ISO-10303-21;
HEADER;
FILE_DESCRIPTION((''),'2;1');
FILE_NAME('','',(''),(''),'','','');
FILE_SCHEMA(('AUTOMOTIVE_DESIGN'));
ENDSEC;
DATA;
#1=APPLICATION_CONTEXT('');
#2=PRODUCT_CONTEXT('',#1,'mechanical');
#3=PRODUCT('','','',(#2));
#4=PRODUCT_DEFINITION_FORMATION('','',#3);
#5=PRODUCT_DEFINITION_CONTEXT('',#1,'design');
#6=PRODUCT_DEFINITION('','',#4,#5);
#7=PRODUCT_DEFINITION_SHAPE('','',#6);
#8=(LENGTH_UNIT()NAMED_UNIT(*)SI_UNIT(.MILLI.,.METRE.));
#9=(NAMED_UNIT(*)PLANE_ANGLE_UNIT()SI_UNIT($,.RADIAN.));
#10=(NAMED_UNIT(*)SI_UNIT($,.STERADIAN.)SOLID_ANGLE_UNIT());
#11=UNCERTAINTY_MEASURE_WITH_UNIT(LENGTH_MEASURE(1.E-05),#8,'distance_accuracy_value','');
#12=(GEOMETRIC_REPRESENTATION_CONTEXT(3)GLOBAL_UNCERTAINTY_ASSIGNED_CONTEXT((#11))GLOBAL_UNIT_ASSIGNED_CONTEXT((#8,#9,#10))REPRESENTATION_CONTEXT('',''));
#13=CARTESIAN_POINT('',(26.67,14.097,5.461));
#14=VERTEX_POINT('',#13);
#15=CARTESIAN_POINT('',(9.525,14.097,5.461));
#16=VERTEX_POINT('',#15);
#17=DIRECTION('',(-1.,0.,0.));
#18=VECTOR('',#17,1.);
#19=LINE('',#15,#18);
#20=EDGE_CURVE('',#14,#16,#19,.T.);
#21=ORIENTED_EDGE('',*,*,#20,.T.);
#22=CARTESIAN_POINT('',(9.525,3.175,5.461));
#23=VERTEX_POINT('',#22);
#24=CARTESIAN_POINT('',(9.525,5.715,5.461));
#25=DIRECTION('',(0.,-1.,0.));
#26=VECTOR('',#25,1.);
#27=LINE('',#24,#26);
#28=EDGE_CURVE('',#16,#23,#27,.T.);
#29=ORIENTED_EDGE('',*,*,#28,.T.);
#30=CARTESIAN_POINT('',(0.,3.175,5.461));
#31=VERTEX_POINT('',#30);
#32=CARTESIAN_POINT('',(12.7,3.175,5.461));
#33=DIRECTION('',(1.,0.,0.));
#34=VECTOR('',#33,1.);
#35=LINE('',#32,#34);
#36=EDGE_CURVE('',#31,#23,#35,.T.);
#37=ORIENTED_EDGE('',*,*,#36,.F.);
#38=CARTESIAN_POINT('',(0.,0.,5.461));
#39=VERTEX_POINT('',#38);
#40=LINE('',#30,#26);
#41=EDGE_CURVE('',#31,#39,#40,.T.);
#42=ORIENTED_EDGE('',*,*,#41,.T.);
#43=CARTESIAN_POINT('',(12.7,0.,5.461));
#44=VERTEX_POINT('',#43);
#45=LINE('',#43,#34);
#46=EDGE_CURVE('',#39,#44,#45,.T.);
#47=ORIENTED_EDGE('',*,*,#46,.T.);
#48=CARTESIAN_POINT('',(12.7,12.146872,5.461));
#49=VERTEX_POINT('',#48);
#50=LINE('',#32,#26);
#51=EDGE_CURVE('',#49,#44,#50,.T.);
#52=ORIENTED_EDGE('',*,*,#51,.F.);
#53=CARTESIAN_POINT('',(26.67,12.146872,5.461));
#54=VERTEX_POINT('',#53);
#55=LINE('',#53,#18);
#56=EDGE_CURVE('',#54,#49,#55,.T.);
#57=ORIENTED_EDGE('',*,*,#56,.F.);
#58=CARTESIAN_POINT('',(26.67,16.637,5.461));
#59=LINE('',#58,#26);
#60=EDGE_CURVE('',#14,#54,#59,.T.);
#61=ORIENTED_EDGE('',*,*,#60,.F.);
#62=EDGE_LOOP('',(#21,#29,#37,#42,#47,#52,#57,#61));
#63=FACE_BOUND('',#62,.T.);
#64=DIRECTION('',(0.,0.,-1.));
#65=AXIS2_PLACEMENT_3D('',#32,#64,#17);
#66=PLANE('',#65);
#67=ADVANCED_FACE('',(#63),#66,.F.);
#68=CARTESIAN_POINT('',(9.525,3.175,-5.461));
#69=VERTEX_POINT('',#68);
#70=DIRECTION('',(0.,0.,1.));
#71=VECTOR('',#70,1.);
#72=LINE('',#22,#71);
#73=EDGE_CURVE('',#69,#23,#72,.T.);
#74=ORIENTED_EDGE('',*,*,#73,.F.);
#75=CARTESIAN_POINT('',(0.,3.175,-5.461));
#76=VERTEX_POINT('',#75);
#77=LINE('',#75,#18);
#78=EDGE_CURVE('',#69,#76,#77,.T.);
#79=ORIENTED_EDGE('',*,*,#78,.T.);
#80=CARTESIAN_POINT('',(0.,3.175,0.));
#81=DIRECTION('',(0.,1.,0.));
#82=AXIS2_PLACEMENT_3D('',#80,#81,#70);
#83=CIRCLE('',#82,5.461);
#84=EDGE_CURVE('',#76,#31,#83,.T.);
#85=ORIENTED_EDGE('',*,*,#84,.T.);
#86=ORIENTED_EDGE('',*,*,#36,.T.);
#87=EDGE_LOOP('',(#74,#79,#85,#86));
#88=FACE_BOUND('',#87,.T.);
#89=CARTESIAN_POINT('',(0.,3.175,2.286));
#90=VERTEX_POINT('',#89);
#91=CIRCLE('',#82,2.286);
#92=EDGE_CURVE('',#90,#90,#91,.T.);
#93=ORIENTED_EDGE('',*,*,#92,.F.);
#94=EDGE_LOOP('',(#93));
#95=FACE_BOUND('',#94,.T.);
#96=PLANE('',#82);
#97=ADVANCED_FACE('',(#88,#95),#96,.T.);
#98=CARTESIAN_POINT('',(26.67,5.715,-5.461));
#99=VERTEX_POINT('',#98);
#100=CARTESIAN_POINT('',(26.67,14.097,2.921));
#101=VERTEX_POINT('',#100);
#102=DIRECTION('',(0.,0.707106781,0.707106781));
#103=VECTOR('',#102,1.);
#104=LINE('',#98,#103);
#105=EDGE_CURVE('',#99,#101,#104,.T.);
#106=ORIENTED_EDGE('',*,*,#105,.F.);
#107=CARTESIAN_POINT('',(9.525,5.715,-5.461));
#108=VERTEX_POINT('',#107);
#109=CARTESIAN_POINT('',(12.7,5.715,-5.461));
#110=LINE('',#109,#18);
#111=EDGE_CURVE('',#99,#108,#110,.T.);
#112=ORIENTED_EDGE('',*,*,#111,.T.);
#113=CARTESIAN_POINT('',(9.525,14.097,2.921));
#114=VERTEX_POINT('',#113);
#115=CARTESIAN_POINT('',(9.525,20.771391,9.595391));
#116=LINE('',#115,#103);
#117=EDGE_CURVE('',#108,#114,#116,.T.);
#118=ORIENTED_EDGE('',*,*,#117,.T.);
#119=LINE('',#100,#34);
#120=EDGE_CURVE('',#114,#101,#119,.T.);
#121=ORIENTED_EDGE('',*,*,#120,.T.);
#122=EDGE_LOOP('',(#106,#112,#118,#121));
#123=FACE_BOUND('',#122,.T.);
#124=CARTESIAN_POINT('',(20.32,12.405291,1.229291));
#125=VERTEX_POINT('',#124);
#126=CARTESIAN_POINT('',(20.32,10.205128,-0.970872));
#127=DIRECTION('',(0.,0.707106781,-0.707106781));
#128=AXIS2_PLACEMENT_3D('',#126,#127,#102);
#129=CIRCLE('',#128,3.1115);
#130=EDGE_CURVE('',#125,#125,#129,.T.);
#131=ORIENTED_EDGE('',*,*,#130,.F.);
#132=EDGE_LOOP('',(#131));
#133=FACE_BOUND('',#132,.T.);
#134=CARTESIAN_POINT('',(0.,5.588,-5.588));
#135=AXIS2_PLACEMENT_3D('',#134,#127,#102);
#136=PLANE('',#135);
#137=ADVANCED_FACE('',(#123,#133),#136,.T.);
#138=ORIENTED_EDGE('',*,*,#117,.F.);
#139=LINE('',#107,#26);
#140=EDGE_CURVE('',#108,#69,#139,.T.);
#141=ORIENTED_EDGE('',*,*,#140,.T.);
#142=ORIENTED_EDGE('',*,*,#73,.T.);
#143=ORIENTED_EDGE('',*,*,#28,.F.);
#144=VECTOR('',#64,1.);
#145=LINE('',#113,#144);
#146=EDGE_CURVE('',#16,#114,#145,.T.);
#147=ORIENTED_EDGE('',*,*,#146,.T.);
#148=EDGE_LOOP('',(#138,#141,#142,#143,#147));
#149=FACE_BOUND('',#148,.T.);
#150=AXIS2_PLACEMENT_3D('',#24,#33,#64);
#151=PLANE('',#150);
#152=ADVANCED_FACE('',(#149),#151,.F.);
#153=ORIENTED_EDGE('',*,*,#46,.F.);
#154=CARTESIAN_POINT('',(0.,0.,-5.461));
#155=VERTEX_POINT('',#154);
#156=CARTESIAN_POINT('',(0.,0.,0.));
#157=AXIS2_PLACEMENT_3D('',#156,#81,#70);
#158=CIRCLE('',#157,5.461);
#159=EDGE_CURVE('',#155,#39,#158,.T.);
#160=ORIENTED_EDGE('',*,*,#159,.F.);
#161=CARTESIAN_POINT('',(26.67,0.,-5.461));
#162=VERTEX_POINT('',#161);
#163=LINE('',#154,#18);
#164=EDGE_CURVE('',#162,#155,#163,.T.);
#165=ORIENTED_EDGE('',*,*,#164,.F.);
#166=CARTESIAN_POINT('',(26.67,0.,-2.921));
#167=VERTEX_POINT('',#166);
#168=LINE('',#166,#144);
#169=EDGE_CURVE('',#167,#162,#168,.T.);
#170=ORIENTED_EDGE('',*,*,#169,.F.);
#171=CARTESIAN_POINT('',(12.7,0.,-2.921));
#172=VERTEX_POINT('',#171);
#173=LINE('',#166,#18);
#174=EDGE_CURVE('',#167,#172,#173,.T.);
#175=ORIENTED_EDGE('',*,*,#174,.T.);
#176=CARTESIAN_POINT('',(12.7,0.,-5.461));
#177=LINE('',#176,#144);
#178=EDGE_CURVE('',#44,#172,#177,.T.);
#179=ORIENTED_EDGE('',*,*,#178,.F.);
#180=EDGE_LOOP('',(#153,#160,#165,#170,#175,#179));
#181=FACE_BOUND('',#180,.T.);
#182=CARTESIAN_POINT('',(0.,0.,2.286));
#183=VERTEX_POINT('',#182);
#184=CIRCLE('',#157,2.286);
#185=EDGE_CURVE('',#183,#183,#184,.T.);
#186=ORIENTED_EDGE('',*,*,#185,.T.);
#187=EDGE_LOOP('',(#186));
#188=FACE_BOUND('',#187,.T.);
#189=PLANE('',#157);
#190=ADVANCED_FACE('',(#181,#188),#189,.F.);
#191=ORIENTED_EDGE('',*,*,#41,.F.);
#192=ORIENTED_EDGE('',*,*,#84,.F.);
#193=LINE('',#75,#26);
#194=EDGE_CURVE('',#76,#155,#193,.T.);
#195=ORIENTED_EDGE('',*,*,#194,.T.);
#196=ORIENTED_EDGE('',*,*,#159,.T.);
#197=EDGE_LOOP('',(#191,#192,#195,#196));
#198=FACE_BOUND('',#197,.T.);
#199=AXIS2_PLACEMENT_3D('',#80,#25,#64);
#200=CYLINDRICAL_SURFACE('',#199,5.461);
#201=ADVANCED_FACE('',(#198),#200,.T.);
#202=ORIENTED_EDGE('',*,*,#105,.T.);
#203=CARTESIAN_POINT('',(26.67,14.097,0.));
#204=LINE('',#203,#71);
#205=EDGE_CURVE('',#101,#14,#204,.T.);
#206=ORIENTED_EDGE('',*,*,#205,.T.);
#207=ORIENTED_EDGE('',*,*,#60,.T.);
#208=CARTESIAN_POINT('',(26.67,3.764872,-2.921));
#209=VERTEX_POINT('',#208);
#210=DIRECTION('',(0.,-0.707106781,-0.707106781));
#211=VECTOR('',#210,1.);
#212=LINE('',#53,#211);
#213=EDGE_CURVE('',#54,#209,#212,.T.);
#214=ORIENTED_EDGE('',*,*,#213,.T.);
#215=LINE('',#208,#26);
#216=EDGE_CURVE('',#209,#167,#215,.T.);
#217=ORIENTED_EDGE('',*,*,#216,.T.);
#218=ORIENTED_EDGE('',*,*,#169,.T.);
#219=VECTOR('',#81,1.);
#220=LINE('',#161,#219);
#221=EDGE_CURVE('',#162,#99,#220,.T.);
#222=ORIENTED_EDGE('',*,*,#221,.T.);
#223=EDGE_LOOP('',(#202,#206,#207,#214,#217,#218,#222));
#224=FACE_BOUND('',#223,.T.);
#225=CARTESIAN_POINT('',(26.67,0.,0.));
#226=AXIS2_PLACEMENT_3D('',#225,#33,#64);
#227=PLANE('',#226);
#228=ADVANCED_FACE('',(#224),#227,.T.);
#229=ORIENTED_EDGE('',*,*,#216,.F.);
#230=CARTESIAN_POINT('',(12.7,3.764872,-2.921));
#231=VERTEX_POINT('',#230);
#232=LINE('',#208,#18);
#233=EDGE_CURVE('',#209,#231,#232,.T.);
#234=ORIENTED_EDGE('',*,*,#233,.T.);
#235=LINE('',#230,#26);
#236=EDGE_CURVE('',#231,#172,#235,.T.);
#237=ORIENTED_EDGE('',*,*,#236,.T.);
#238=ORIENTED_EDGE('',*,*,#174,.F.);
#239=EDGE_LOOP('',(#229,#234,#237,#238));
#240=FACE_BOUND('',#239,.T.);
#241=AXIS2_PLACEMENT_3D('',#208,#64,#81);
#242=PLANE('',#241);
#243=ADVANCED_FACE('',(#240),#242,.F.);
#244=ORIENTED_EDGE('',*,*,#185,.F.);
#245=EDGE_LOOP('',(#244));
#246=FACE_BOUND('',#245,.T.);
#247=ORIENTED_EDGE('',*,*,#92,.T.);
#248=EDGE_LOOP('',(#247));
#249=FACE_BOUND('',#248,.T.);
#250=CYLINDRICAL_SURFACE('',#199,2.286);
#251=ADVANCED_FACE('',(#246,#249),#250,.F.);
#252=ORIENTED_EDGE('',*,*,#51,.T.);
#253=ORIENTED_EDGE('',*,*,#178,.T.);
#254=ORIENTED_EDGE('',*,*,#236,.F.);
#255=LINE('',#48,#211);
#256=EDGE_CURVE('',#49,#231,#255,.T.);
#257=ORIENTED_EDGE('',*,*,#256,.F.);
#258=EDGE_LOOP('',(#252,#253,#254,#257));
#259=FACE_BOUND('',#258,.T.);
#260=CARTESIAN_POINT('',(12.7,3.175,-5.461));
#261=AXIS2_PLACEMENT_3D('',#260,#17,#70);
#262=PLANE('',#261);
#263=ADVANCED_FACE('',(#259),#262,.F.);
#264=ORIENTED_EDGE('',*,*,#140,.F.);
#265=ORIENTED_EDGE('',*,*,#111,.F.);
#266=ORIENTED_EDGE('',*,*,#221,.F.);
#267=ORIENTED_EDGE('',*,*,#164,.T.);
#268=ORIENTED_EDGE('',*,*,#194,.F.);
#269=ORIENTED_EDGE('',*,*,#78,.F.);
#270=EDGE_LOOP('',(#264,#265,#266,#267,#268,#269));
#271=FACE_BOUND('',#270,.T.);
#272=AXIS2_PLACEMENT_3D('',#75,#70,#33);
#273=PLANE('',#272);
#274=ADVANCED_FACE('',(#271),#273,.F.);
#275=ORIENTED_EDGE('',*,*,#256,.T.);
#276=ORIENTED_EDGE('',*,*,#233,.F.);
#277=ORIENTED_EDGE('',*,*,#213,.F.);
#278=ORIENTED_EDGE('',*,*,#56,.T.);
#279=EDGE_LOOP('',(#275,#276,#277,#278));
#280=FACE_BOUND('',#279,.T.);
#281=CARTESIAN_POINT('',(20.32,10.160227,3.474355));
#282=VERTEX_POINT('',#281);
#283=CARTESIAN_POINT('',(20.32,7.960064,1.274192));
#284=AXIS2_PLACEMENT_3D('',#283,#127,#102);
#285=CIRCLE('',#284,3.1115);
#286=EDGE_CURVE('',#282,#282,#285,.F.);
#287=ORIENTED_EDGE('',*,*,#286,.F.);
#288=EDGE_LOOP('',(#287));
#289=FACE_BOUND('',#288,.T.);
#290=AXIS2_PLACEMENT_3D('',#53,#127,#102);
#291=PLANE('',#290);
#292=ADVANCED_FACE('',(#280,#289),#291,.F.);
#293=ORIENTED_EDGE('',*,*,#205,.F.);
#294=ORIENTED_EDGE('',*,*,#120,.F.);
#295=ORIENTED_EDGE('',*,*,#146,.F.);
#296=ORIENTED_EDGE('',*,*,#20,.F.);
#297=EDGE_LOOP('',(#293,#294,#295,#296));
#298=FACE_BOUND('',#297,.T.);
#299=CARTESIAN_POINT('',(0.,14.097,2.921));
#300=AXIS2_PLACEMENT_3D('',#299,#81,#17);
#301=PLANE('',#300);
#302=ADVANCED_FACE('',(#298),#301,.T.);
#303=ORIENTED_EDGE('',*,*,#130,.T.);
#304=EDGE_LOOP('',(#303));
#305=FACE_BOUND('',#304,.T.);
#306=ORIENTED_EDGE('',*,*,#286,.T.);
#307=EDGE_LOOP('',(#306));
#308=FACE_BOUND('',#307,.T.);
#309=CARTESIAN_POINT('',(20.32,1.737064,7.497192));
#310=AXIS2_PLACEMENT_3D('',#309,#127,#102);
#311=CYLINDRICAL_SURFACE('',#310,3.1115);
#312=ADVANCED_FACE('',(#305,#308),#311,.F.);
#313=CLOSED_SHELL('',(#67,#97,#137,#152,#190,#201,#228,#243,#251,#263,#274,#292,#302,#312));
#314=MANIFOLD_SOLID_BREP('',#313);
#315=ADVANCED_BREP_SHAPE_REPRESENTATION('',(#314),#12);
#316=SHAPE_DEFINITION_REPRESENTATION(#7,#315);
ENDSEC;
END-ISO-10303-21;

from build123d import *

# Parameters (mm, degrees)
SKETCH1_R           = 2.286
BOSS_EXTRUDE1_DEPTH = 3.175
SKETCH5_W           = 3.175
SKETCH5_H           = 10.922
BOSS_EXTRUDE5_DEPTH = 2.54
BOSS_EXTRUDE6_START = 9.525
BOSS_EXTRUDE6_DEPTH = 3.175
BOSS_EXTRUDE7_DEPTH = 13.97
SKETCH10_R          = 3.1115
CUT_EXTRUDE1_DEPTH  = 3.175
CHAMFER1_SIZE       = 2.54
CHAMFER1_SIZE2      = 3.592102448


# Read off the part's stored shape, not the designer's step: Boss-Extrude6
with BuildPart() as part:
    # Sketch1 → Boss-Extrude1 (new body)
    with BuildSketch(Plane(origin=(0, 0, 0), x_dir=(1, 0, 0), z_dir=(0, 1, 0))):
        with BuildLine():
            Line((0, 5.461), (12.7, 5.461))
            Line((12.7, 5.461), (12.7, -5.461))
            Line((12.7, -5.461), (0, -5.461))
            ThreePointArc((0, -5.461), (-5.461, 0), (0, 5.461))
        make_face()
        with Locations(Location((0, 0, 0), (0, 0, 270))):
            Circle(SKETCH1_R, mode=Mode.SUBTRACT)
    extrude(amount=BOSS_EXTRUDE1_DEPTH)

    # Sketch5 → Boss-Extrude5 (add)
    with BuildSketch(Plane(origin=(0, 3.175, 0), x_dir=(1, 0, 0), z_dir=(0, 1, 0))):
        with Locations((11.1125, 0)):
            Rectangle(SKETCH5_W, SKETCH5_H)
    extrude(amount=BOSS_EXTRUDE5_DEPTH)

    # Boss-Extrude6 outline → Boss-Extrude6 (add)
    with BuildSketch(Plane.YZ.offset(BOSS_EXTRUDE6_START)):
        Polygon((16.637, 5.461), (5.715, 5.461), (5.715, -5.461), align=None)
    extrude(amount=BOSS_EXTRUDE6_DEPTH)

    # Sketch9 → Boss-Extrude7 (add)
    with BuildSketch(Plane(origin=(12.7, 0, 0), x_dir=(0, 0, -1), z_dir=(1, 0, 0))):
        Polygon((-5.461, 16.637), (-5.461, 12.146871939), (2.921, 3.764871939), (2.921, 0), (5.461, 0), (5.461, 1.224871939), (5.461, 5.715), align=None)
    extrude(amount=BOSS_EXTRUDE7_DEPTH)

    # Sketch10 → Cut-Extrude1 (cut)
    with BuildSketch(Plane(origin=(0, 5.588, -5.588), x_dir=(1, 0, 0), z_dir=(0, 0.7071067811865465, -0.7071067811865487))):
        with Locations(Location((20.32, -6.529605122, 0), (0, 0, 270))):
            Circle(SKETCH10_R)
    extrude(amount=-CUT_EXTRUDE1_DEPTH, mode=Mode.SUBTRACT)

    # Chamfer1
    chamfer1_edges = [part.edges().sort_by_distance(p)[0] for p in [
        (18.0975, 16.637, 5.461),
    ]]
    chamfer1_side = [part.faces().sort_by_distance(p)[0] for p in [
        (12.385662813, 6.07343597, 5.461),
    ]]
    chamfer(chamfer1_edges, length=CHAMFER1_SIZE, length2=CHAMFER1_SIZE2, reference=chamfer1_side[0])


solid = part.part
